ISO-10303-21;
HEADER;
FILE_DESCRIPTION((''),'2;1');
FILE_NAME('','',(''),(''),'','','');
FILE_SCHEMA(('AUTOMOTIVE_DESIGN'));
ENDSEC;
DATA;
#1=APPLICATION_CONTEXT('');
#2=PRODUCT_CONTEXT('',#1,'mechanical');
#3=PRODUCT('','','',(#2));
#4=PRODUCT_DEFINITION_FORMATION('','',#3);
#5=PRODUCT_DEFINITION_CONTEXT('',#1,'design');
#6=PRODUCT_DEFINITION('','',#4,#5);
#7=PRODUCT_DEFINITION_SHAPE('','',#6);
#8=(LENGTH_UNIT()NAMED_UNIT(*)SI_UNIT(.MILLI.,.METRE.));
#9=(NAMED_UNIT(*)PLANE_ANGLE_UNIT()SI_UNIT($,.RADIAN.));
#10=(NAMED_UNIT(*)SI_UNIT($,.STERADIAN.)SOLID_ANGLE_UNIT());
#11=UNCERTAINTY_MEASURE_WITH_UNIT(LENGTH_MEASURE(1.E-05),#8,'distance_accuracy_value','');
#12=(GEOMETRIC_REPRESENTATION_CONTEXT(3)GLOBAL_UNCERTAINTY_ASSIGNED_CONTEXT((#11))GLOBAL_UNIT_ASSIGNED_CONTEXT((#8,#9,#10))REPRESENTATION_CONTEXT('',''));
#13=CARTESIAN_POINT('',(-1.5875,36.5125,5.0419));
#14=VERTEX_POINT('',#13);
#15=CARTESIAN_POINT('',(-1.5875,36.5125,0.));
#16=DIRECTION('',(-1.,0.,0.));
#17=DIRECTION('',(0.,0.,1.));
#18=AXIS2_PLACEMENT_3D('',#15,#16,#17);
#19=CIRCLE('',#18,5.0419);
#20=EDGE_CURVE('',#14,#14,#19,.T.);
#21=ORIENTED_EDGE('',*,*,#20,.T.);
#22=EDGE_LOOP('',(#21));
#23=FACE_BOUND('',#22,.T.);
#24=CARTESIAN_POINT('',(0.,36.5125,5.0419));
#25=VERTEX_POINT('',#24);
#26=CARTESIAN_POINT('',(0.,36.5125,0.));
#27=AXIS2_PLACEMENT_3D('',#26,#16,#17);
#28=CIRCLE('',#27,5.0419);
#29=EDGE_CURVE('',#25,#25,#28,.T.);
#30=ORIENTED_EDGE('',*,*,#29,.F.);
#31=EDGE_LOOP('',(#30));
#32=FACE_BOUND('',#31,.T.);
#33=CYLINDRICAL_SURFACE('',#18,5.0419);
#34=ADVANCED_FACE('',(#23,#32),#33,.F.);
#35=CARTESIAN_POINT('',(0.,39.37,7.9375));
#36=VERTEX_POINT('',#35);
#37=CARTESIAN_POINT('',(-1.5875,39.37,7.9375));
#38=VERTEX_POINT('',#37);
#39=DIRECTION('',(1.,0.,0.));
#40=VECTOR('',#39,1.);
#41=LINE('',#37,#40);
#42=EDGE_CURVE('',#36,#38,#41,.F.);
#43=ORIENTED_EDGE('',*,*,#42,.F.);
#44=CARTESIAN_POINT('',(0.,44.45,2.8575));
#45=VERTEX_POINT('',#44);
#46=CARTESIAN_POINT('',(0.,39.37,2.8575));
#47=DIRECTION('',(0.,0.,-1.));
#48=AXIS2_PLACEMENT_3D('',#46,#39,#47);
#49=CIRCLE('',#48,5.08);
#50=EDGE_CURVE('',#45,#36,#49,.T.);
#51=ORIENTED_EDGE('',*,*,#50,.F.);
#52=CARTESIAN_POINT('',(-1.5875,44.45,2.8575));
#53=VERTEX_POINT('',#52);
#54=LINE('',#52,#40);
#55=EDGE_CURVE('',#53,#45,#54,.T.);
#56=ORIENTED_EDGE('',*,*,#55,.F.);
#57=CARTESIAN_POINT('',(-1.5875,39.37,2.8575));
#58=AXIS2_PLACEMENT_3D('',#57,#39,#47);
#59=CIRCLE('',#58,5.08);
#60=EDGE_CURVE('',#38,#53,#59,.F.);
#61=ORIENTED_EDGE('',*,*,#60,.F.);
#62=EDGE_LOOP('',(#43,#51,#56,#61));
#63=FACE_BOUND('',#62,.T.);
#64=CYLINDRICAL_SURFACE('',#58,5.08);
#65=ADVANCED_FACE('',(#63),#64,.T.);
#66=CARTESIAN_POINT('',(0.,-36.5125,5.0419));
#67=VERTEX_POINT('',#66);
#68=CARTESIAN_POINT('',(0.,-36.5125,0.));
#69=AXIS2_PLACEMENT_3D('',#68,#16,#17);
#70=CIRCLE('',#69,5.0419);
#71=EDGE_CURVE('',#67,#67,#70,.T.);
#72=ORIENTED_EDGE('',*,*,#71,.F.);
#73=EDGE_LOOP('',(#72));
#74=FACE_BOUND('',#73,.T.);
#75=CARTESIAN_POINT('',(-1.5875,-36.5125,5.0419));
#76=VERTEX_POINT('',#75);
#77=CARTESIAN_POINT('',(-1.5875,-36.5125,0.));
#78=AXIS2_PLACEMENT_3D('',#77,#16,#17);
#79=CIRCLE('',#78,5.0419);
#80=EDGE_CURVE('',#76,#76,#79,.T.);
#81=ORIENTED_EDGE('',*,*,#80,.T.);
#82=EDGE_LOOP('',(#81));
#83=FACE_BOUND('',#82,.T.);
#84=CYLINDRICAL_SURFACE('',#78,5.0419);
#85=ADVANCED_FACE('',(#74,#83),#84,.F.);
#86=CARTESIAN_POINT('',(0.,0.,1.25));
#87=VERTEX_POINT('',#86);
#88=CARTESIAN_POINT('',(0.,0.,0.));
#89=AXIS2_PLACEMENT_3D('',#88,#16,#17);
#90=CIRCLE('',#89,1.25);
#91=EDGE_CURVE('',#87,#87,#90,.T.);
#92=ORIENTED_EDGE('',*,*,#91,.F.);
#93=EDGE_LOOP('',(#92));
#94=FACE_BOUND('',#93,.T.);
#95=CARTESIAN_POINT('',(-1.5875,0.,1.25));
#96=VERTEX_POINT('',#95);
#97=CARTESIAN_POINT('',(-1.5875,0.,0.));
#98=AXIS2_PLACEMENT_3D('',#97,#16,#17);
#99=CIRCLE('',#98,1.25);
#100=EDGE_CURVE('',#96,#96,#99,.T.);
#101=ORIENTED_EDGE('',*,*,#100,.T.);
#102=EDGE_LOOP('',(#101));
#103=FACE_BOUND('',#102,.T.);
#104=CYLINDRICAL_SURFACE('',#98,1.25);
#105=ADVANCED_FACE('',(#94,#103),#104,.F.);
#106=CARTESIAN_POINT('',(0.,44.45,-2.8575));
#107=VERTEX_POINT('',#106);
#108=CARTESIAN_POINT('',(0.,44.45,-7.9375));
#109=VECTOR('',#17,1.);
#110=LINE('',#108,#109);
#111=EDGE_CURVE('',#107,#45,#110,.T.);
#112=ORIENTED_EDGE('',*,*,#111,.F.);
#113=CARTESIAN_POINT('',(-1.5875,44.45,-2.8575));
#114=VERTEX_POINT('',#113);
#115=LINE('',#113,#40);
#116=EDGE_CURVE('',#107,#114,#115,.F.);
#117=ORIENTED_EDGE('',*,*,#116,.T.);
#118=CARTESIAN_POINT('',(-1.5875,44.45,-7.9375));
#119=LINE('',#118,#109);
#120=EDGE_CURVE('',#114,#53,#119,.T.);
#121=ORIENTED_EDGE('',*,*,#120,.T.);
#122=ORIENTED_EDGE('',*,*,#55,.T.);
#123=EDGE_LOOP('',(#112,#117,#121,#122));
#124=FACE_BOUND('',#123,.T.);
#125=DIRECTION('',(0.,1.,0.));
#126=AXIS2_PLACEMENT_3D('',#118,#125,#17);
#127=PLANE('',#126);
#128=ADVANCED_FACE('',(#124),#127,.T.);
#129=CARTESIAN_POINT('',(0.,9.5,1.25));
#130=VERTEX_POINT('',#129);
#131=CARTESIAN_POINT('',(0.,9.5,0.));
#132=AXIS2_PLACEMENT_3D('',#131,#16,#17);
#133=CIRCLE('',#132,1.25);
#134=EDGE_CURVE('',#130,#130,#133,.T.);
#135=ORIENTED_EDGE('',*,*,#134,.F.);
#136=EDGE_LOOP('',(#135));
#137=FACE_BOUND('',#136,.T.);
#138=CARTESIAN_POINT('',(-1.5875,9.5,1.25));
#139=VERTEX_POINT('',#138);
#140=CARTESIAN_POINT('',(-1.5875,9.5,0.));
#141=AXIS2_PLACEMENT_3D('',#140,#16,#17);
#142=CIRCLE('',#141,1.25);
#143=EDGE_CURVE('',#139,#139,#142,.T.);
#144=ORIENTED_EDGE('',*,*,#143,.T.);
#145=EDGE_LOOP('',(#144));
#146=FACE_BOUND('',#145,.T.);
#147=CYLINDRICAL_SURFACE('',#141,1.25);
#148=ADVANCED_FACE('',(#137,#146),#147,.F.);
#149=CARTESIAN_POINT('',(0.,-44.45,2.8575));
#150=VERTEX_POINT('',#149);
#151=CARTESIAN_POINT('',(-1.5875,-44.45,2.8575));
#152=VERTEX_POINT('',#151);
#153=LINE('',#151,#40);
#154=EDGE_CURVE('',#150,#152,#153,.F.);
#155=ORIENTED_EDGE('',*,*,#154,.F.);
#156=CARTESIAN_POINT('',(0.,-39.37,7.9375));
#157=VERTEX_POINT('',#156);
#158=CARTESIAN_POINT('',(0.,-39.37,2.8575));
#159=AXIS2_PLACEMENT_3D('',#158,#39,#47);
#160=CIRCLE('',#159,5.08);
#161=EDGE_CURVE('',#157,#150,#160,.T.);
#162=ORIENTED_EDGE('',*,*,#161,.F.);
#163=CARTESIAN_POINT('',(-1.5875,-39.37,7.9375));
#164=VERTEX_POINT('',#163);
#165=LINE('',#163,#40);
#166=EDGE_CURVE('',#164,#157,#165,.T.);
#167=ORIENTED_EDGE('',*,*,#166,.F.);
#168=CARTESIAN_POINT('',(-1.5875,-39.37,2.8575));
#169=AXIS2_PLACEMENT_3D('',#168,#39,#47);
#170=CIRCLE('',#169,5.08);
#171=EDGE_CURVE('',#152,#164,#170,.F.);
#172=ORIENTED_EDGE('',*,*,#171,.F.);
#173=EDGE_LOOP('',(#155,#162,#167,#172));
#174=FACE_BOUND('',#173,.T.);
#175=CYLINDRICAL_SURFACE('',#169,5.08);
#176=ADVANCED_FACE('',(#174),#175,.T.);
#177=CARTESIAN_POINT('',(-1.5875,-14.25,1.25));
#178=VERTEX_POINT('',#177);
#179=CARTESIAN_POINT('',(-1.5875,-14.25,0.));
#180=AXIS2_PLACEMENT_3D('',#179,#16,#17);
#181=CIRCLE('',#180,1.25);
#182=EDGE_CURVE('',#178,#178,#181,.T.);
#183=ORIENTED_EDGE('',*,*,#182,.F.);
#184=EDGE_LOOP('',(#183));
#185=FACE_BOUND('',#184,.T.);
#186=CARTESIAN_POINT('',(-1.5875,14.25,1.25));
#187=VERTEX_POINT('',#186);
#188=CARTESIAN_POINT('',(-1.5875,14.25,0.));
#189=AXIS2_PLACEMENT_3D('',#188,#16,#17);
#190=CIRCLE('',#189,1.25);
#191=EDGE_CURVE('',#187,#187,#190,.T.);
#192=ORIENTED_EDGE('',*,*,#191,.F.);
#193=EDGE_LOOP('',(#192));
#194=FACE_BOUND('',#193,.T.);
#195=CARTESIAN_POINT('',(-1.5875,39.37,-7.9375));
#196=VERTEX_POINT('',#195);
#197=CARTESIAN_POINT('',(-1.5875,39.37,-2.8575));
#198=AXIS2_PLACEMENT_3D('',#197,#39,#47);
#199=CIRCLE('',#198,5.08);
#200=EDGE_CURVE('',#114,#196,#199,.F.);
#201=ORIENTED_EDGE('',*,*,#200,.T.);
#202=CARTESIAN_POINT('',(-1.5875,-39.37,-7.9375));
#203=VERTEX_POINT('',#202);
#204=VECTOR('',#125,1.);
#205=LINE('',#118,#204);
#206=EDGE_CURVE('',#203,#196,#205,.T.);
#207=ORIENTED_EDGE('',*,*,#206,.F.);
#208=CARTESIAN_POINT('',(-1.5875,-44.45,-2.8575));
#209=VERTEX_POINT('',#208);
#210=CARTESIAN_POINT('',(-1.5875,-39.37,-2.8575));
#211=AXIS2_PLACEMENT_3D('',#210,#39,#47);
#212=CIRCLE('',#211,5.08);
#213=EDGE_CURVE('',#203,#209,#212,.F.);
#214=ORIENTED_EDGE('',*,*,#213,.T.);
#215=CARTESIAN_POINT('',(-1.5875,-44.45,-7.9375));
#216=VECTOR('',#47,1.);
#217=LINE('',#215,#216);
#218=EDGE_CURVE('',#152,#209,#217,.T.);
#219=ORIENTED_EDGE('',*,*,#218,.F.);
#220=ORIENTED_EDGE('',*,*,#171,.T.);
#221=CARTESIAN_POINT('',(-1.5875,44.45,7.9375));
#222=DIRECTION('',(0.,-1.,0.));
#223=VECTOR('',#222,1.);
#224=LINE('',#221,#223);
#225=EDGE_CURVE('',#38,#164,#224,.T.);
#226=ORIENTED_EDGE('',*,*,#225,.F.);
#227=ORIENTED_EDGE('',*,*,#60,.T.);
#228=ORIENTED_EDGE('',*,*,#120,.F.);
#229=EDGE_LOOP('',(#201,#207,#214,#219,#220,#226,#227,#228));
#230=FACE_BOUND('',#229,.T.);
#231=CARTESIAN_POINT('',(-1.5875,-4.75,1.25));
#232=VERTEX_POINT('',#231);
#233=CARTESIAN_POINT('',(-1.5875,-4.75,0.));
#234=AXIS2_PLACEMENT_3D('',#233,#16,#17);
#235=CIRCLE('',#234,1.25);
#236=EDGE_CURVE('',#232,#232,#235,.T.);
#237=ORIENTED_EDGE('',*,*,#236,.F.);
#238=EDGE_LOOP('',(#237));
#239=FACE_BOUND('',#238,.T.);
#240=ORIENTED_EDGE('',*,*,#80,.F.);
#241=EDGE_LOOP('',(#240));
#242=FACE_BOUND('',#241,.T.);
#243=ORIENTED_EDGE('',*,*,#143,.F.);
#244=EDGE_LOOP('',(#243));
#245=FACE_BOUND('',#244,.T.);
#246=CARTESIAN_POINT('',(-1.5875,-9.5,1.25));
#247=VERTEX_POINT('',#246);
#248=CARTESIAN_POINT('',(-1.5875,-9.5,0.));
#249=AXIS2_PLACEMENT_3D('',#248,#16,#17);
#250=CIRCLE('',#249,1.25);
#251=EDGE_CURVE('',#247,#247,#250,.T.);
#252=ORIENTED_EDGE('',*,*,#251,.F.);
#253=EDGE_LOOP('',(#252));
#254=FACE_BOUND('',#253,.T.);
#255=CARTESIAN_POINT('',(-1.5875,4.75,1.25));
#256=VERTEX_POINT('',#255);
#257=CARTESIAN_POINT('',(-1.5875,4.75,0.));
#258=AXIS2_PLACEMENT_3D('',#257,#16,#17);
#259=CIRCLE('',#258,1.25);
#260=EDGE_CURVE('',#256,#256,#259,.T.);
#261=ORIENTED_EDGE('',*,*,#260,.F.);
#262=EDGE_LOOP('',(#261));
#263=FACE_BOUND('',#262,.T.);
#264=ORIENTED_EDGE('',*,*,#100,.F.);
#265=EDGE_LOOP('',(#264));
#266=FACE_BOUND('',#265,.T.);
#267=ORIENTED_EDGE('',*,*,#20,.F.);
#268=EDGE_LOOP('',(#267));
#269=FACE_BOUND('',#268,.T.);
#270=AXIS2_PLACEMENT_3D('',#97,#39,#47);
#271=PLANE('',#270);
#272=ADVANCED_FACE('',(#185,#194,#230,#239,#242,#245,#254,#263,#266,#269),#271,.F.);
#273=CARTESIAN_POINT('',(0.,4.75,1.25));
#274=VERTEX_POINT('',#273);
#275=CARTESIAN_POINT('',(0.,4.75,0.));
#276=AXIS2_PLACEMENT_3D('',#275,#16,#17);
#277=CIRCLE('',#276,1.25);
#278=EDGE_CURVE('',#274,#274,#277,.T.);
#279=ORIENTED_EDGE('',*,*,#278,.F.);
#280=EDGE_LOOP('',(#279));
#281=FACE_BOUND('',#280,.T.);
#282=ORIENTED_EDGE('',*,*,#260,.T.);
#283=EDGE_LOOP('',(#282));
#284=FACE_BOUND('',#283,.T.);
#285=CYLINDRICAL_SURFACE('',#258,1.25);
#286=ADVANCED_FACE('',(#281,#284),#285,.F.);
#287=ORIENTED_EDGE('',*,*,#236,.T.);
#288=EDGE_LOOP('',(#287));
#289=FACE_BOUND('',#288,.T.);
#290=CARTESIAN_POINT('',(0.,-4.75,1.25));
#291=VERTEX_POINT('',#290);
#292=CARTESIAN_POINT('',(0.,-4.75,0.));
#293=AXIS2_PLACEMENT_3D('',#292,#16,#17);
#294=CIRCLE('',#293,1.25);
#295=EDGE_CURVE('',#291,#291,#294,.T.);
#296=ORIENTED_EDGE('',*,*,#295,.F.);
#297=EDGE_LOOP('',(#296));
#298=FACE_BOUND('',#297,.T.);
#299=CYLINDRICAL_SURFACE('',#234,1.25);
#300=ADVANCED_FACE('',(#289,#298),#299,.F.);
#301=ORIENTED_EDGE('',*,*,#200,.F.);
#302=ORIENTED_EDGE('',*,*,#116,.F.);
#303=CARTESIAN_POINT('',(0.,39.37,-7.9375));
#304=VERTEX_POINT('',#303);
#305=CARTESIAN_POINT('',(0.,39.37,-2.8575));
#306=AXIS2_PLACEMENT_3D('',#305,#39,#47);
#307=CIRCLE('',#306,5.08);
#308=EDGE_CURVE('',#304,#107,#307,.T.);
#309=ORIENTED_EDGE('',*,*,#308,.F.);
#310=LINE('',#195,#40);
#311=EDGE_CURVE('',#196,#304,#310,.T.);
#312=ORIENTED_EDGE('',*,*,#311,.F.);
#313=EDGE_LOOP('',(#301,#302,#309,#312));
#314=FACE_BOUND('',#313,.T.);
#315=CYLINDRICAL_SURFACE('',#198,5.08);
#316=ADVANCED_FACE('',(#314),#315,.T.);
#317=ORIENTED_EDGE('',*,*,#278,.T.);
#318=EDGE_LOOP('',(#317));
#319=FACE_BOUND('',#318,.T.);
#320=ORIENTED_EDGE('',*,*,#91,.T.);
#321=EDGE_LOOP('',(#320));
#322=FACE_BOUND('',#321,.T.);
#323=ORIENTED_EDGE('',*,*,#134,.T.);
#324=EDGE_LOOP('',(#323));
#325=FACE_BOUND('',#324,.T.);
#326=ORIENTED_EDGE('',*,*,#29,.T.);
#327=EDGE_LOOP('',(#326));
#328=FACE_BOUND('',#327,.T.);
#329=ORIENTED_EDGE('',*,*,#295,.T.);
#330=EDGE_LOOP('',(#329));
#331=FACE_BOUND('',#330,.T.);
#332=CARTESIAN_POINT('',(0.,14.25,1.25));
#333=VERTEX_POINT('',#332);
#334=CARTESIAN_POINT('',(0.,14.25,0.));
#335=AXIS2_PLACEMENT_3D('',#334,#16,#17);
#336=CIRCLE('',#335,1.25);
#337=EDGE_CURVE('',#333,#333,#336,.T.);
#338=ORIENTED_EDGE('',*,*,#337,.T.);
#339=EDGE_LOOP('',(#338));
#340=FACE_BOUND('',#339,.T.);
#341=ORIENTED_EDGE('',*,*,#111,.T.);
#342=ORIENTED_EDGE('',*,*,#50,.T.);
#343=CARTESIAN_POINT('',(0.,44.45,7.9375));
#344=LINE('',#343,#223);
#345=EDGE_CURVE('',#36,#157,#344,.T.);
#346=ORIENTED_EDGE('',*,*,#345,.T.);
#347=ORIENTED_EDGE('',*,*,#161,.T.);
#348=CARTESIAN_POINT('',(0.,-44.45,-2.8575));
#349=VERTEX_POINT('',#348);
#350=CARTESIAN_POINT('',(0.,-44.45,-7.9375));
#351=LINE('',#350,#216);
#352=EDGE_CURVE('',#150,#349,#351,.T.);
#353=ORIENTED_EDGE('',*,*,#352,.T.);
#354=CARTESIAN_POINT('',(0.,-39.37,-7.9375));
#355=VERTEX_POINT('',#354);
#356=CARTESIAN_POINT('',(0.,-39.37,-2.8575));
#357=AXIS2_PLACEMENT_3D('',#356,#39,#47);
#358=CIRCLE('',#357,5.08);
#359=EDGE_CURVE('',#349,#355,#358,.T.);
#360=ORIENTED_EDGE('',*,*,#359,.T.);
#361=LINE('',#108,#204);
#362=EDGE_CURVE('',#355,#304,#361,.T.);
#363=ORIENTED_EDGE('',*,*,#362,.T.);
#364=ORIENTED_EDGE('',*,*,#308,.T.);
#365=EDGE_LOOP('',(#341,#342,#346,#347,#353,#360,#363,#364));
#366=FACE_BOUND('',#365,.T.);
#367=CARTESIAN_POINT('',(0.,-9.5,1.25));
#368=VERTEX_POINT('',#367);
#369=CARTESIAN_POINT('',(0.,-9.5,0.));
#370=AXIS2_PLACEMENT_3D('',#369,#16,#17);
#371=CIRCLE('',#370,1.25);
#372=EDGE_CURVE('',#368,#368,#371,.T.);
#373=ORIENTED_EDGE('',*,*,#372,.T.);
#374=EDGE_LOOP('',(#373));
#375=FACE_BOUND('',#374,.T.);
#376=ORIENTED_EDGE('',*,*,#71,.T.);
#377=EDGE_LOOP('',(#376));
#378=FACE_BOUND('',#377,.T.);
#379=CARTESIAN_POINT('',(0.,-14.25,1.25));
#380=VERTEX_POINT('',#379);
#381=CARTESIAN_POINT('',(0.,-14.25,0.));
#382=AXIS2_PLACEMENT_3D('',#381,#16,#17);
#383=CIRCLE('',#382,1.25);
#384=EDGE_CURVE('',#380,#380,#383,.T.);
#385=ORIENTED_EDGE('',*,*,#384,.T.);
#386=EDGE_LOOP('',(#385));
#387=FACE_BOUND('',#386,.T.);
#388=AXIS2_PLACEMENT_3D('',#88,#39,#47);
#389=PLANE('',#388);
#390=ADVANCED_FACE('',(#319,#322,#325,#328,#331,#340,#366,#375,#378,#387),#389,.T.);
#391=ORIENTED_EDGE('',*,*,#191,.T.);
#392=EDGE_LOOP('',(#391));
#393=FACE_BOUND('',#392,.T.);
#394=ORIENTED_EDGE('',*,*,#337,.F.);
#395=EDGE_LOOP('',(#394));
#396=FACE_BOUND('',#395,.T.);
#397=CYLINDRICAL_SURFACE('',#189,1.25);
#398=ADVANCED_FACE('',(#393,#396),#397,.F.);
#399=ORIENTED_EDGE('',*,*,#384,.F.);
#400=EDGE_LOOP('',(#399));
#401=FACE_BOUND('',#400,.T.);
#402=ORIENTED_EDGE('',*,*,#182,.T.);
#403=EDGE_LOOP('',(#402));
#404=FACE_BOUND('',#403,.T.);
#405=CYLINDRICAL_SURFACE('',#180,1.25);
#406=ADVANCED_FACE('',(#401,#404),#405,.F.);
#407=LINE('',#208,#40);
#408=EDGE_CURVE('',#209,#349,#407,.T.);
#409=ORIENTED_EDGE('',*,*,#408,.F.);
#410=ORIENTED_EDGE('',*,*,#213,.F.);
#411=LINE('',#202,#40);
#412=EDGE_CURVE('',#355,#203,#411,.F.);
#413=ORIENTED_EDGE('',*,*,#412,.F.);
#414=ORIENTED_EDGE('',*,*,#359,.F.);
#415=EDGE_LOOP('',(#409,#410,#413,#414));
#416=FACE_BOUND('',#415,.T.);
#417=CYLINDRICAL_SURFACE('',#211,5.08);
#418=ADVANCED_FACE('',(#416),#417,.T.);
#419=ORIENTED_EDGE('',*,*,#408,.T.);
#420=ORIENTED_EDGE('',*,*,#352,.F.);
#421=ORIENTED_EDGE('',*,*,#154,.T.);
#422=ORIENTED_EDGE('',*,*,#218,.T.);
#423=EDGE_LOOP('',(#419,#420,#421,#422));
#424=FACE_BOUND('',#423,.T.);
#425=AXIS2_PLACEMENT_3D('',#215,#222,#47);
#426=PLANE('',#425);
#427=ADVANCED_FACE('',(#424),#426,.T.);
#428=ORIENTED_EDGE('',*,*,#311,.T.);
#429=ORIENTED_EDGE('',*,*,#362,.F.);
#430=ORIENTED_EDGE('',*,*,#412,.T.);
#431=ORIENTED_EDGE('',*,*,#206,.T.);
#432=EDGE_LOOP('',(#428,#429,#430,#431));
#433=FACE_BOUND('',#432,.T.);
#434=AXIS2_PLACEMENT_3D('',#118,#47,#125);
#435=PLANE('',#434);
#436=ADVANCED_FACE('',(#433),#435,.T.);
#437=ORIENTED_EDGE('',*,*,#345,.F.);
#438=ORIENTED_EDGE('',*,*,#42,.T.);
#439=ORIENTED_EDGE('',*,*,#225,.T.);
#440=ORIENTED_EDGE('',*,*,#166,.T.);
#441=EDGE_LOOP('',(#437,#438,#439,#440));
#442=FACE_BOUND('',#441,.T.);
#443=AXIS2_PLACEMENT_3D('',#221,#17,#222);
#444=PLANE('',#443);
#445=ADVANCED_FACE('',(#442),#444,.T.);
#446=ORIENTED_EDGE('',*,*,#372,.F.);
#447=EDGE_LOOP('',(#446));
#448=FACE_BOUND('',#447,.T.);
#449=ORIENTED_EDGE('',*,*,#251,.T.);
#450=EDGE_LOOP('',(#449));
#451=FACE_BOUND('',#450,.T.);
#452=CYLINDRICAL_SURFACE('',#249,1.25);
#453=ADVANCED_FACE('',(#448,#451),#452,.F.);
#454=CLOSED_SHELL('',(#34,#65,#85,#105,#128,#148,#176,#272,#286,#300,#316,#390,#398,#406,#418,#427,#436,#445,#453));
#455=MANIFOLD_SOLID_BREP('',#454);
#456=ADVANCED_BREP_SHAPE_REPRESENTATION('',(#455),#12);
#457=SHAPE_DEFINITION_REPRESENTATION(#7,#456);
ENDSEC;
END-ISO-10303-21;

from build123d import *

# Parameters (mm, degrees)
SKETCH1_W               = 88.9
SKETCH1_H               = 15.875
BASE_FLANGE1_DEPTH      = 1.5875
F_2_5MM_DOWEL_HOLE1_D   = 2.5
LPATTERN1_COUNT         = 4
LPATTERN1_PITCH         = 4.750000025
LPATTERN1_COL_COUNT     = 4
LPATTERN1_COL_PITCH     = 4.750000025
FILLET1_R               = 5.08
F_3_8_CLEARANCE_HOLE1_D = 10.0838


# Sheet-metal steps are written as plain solids
with BuildPart() as part:
    # Sketch1 → Base-Flange1 (new body)
    with BuildSketch(Plane.YZ):
        Rectangle(SKETCH1_W, SKETCH1_H)
    extrude(amount=-BASE_FLANGE1_DEPTH)

    # Ø2.5mm Dowel Hole1 (through all)
    with Locations(Plane(origin=(-1.5875, 0, 0), x_dir=(0, -1, 0), z_dir=(-1, 0, 0))):
        with Locations((0, 0)):
            f_2_5mm_dowel_hole1 = Hole(F_2_5MM_DOWEL_HOLE1_D / 2)

    # LPattern1: Ø2.5mm Dowel Hole1 ×4
    with Locations(*[(0, -i * LPATTERN1_PITCH, 0) for i in range(1, LPATTERN1_COUNT)]):
        add(f_2_5mm_dowel_hole1, mode=Mode.SUBTRACT)

    # LPattern1 col: Ø2.5mm Dowel Hole1 ×4
    with Locations(*[(0, i * LPATTERN1_COL_PITCH, 0) for i in range(1, LPATTERN1_COL_COUNT)]):
        add(f_2_5mm_dowel_hole1, mode=Mode.SUBTRACT)

    # Fillet1
    fillet1_edges = [part.edges().sort_by_distance(p)[0] for p in [
        (-0.79375, -44.45, 7.9375),
        (-0.79375, 44.45, 7.9375),
        (-0.79375, 44.45, -7.9375),
        (-0.79375, -44.45, -7.9375),
    ]]
    fillet(fillet1_edges, radius=FILLET1_R)

    # 3/8 Clearance Hole1 (through all)
    with Locations(Plane(origin=(-1.5875, 0, 0), x_dir=(0, -1, 0), z_dir=(-1, 0, 0))):
        with Locations((-36.5125, 0), (36.5125, 0)):
            Hole(F_3_8_CLEARANCE_HOLE1_D / 2)


solid = part.part
